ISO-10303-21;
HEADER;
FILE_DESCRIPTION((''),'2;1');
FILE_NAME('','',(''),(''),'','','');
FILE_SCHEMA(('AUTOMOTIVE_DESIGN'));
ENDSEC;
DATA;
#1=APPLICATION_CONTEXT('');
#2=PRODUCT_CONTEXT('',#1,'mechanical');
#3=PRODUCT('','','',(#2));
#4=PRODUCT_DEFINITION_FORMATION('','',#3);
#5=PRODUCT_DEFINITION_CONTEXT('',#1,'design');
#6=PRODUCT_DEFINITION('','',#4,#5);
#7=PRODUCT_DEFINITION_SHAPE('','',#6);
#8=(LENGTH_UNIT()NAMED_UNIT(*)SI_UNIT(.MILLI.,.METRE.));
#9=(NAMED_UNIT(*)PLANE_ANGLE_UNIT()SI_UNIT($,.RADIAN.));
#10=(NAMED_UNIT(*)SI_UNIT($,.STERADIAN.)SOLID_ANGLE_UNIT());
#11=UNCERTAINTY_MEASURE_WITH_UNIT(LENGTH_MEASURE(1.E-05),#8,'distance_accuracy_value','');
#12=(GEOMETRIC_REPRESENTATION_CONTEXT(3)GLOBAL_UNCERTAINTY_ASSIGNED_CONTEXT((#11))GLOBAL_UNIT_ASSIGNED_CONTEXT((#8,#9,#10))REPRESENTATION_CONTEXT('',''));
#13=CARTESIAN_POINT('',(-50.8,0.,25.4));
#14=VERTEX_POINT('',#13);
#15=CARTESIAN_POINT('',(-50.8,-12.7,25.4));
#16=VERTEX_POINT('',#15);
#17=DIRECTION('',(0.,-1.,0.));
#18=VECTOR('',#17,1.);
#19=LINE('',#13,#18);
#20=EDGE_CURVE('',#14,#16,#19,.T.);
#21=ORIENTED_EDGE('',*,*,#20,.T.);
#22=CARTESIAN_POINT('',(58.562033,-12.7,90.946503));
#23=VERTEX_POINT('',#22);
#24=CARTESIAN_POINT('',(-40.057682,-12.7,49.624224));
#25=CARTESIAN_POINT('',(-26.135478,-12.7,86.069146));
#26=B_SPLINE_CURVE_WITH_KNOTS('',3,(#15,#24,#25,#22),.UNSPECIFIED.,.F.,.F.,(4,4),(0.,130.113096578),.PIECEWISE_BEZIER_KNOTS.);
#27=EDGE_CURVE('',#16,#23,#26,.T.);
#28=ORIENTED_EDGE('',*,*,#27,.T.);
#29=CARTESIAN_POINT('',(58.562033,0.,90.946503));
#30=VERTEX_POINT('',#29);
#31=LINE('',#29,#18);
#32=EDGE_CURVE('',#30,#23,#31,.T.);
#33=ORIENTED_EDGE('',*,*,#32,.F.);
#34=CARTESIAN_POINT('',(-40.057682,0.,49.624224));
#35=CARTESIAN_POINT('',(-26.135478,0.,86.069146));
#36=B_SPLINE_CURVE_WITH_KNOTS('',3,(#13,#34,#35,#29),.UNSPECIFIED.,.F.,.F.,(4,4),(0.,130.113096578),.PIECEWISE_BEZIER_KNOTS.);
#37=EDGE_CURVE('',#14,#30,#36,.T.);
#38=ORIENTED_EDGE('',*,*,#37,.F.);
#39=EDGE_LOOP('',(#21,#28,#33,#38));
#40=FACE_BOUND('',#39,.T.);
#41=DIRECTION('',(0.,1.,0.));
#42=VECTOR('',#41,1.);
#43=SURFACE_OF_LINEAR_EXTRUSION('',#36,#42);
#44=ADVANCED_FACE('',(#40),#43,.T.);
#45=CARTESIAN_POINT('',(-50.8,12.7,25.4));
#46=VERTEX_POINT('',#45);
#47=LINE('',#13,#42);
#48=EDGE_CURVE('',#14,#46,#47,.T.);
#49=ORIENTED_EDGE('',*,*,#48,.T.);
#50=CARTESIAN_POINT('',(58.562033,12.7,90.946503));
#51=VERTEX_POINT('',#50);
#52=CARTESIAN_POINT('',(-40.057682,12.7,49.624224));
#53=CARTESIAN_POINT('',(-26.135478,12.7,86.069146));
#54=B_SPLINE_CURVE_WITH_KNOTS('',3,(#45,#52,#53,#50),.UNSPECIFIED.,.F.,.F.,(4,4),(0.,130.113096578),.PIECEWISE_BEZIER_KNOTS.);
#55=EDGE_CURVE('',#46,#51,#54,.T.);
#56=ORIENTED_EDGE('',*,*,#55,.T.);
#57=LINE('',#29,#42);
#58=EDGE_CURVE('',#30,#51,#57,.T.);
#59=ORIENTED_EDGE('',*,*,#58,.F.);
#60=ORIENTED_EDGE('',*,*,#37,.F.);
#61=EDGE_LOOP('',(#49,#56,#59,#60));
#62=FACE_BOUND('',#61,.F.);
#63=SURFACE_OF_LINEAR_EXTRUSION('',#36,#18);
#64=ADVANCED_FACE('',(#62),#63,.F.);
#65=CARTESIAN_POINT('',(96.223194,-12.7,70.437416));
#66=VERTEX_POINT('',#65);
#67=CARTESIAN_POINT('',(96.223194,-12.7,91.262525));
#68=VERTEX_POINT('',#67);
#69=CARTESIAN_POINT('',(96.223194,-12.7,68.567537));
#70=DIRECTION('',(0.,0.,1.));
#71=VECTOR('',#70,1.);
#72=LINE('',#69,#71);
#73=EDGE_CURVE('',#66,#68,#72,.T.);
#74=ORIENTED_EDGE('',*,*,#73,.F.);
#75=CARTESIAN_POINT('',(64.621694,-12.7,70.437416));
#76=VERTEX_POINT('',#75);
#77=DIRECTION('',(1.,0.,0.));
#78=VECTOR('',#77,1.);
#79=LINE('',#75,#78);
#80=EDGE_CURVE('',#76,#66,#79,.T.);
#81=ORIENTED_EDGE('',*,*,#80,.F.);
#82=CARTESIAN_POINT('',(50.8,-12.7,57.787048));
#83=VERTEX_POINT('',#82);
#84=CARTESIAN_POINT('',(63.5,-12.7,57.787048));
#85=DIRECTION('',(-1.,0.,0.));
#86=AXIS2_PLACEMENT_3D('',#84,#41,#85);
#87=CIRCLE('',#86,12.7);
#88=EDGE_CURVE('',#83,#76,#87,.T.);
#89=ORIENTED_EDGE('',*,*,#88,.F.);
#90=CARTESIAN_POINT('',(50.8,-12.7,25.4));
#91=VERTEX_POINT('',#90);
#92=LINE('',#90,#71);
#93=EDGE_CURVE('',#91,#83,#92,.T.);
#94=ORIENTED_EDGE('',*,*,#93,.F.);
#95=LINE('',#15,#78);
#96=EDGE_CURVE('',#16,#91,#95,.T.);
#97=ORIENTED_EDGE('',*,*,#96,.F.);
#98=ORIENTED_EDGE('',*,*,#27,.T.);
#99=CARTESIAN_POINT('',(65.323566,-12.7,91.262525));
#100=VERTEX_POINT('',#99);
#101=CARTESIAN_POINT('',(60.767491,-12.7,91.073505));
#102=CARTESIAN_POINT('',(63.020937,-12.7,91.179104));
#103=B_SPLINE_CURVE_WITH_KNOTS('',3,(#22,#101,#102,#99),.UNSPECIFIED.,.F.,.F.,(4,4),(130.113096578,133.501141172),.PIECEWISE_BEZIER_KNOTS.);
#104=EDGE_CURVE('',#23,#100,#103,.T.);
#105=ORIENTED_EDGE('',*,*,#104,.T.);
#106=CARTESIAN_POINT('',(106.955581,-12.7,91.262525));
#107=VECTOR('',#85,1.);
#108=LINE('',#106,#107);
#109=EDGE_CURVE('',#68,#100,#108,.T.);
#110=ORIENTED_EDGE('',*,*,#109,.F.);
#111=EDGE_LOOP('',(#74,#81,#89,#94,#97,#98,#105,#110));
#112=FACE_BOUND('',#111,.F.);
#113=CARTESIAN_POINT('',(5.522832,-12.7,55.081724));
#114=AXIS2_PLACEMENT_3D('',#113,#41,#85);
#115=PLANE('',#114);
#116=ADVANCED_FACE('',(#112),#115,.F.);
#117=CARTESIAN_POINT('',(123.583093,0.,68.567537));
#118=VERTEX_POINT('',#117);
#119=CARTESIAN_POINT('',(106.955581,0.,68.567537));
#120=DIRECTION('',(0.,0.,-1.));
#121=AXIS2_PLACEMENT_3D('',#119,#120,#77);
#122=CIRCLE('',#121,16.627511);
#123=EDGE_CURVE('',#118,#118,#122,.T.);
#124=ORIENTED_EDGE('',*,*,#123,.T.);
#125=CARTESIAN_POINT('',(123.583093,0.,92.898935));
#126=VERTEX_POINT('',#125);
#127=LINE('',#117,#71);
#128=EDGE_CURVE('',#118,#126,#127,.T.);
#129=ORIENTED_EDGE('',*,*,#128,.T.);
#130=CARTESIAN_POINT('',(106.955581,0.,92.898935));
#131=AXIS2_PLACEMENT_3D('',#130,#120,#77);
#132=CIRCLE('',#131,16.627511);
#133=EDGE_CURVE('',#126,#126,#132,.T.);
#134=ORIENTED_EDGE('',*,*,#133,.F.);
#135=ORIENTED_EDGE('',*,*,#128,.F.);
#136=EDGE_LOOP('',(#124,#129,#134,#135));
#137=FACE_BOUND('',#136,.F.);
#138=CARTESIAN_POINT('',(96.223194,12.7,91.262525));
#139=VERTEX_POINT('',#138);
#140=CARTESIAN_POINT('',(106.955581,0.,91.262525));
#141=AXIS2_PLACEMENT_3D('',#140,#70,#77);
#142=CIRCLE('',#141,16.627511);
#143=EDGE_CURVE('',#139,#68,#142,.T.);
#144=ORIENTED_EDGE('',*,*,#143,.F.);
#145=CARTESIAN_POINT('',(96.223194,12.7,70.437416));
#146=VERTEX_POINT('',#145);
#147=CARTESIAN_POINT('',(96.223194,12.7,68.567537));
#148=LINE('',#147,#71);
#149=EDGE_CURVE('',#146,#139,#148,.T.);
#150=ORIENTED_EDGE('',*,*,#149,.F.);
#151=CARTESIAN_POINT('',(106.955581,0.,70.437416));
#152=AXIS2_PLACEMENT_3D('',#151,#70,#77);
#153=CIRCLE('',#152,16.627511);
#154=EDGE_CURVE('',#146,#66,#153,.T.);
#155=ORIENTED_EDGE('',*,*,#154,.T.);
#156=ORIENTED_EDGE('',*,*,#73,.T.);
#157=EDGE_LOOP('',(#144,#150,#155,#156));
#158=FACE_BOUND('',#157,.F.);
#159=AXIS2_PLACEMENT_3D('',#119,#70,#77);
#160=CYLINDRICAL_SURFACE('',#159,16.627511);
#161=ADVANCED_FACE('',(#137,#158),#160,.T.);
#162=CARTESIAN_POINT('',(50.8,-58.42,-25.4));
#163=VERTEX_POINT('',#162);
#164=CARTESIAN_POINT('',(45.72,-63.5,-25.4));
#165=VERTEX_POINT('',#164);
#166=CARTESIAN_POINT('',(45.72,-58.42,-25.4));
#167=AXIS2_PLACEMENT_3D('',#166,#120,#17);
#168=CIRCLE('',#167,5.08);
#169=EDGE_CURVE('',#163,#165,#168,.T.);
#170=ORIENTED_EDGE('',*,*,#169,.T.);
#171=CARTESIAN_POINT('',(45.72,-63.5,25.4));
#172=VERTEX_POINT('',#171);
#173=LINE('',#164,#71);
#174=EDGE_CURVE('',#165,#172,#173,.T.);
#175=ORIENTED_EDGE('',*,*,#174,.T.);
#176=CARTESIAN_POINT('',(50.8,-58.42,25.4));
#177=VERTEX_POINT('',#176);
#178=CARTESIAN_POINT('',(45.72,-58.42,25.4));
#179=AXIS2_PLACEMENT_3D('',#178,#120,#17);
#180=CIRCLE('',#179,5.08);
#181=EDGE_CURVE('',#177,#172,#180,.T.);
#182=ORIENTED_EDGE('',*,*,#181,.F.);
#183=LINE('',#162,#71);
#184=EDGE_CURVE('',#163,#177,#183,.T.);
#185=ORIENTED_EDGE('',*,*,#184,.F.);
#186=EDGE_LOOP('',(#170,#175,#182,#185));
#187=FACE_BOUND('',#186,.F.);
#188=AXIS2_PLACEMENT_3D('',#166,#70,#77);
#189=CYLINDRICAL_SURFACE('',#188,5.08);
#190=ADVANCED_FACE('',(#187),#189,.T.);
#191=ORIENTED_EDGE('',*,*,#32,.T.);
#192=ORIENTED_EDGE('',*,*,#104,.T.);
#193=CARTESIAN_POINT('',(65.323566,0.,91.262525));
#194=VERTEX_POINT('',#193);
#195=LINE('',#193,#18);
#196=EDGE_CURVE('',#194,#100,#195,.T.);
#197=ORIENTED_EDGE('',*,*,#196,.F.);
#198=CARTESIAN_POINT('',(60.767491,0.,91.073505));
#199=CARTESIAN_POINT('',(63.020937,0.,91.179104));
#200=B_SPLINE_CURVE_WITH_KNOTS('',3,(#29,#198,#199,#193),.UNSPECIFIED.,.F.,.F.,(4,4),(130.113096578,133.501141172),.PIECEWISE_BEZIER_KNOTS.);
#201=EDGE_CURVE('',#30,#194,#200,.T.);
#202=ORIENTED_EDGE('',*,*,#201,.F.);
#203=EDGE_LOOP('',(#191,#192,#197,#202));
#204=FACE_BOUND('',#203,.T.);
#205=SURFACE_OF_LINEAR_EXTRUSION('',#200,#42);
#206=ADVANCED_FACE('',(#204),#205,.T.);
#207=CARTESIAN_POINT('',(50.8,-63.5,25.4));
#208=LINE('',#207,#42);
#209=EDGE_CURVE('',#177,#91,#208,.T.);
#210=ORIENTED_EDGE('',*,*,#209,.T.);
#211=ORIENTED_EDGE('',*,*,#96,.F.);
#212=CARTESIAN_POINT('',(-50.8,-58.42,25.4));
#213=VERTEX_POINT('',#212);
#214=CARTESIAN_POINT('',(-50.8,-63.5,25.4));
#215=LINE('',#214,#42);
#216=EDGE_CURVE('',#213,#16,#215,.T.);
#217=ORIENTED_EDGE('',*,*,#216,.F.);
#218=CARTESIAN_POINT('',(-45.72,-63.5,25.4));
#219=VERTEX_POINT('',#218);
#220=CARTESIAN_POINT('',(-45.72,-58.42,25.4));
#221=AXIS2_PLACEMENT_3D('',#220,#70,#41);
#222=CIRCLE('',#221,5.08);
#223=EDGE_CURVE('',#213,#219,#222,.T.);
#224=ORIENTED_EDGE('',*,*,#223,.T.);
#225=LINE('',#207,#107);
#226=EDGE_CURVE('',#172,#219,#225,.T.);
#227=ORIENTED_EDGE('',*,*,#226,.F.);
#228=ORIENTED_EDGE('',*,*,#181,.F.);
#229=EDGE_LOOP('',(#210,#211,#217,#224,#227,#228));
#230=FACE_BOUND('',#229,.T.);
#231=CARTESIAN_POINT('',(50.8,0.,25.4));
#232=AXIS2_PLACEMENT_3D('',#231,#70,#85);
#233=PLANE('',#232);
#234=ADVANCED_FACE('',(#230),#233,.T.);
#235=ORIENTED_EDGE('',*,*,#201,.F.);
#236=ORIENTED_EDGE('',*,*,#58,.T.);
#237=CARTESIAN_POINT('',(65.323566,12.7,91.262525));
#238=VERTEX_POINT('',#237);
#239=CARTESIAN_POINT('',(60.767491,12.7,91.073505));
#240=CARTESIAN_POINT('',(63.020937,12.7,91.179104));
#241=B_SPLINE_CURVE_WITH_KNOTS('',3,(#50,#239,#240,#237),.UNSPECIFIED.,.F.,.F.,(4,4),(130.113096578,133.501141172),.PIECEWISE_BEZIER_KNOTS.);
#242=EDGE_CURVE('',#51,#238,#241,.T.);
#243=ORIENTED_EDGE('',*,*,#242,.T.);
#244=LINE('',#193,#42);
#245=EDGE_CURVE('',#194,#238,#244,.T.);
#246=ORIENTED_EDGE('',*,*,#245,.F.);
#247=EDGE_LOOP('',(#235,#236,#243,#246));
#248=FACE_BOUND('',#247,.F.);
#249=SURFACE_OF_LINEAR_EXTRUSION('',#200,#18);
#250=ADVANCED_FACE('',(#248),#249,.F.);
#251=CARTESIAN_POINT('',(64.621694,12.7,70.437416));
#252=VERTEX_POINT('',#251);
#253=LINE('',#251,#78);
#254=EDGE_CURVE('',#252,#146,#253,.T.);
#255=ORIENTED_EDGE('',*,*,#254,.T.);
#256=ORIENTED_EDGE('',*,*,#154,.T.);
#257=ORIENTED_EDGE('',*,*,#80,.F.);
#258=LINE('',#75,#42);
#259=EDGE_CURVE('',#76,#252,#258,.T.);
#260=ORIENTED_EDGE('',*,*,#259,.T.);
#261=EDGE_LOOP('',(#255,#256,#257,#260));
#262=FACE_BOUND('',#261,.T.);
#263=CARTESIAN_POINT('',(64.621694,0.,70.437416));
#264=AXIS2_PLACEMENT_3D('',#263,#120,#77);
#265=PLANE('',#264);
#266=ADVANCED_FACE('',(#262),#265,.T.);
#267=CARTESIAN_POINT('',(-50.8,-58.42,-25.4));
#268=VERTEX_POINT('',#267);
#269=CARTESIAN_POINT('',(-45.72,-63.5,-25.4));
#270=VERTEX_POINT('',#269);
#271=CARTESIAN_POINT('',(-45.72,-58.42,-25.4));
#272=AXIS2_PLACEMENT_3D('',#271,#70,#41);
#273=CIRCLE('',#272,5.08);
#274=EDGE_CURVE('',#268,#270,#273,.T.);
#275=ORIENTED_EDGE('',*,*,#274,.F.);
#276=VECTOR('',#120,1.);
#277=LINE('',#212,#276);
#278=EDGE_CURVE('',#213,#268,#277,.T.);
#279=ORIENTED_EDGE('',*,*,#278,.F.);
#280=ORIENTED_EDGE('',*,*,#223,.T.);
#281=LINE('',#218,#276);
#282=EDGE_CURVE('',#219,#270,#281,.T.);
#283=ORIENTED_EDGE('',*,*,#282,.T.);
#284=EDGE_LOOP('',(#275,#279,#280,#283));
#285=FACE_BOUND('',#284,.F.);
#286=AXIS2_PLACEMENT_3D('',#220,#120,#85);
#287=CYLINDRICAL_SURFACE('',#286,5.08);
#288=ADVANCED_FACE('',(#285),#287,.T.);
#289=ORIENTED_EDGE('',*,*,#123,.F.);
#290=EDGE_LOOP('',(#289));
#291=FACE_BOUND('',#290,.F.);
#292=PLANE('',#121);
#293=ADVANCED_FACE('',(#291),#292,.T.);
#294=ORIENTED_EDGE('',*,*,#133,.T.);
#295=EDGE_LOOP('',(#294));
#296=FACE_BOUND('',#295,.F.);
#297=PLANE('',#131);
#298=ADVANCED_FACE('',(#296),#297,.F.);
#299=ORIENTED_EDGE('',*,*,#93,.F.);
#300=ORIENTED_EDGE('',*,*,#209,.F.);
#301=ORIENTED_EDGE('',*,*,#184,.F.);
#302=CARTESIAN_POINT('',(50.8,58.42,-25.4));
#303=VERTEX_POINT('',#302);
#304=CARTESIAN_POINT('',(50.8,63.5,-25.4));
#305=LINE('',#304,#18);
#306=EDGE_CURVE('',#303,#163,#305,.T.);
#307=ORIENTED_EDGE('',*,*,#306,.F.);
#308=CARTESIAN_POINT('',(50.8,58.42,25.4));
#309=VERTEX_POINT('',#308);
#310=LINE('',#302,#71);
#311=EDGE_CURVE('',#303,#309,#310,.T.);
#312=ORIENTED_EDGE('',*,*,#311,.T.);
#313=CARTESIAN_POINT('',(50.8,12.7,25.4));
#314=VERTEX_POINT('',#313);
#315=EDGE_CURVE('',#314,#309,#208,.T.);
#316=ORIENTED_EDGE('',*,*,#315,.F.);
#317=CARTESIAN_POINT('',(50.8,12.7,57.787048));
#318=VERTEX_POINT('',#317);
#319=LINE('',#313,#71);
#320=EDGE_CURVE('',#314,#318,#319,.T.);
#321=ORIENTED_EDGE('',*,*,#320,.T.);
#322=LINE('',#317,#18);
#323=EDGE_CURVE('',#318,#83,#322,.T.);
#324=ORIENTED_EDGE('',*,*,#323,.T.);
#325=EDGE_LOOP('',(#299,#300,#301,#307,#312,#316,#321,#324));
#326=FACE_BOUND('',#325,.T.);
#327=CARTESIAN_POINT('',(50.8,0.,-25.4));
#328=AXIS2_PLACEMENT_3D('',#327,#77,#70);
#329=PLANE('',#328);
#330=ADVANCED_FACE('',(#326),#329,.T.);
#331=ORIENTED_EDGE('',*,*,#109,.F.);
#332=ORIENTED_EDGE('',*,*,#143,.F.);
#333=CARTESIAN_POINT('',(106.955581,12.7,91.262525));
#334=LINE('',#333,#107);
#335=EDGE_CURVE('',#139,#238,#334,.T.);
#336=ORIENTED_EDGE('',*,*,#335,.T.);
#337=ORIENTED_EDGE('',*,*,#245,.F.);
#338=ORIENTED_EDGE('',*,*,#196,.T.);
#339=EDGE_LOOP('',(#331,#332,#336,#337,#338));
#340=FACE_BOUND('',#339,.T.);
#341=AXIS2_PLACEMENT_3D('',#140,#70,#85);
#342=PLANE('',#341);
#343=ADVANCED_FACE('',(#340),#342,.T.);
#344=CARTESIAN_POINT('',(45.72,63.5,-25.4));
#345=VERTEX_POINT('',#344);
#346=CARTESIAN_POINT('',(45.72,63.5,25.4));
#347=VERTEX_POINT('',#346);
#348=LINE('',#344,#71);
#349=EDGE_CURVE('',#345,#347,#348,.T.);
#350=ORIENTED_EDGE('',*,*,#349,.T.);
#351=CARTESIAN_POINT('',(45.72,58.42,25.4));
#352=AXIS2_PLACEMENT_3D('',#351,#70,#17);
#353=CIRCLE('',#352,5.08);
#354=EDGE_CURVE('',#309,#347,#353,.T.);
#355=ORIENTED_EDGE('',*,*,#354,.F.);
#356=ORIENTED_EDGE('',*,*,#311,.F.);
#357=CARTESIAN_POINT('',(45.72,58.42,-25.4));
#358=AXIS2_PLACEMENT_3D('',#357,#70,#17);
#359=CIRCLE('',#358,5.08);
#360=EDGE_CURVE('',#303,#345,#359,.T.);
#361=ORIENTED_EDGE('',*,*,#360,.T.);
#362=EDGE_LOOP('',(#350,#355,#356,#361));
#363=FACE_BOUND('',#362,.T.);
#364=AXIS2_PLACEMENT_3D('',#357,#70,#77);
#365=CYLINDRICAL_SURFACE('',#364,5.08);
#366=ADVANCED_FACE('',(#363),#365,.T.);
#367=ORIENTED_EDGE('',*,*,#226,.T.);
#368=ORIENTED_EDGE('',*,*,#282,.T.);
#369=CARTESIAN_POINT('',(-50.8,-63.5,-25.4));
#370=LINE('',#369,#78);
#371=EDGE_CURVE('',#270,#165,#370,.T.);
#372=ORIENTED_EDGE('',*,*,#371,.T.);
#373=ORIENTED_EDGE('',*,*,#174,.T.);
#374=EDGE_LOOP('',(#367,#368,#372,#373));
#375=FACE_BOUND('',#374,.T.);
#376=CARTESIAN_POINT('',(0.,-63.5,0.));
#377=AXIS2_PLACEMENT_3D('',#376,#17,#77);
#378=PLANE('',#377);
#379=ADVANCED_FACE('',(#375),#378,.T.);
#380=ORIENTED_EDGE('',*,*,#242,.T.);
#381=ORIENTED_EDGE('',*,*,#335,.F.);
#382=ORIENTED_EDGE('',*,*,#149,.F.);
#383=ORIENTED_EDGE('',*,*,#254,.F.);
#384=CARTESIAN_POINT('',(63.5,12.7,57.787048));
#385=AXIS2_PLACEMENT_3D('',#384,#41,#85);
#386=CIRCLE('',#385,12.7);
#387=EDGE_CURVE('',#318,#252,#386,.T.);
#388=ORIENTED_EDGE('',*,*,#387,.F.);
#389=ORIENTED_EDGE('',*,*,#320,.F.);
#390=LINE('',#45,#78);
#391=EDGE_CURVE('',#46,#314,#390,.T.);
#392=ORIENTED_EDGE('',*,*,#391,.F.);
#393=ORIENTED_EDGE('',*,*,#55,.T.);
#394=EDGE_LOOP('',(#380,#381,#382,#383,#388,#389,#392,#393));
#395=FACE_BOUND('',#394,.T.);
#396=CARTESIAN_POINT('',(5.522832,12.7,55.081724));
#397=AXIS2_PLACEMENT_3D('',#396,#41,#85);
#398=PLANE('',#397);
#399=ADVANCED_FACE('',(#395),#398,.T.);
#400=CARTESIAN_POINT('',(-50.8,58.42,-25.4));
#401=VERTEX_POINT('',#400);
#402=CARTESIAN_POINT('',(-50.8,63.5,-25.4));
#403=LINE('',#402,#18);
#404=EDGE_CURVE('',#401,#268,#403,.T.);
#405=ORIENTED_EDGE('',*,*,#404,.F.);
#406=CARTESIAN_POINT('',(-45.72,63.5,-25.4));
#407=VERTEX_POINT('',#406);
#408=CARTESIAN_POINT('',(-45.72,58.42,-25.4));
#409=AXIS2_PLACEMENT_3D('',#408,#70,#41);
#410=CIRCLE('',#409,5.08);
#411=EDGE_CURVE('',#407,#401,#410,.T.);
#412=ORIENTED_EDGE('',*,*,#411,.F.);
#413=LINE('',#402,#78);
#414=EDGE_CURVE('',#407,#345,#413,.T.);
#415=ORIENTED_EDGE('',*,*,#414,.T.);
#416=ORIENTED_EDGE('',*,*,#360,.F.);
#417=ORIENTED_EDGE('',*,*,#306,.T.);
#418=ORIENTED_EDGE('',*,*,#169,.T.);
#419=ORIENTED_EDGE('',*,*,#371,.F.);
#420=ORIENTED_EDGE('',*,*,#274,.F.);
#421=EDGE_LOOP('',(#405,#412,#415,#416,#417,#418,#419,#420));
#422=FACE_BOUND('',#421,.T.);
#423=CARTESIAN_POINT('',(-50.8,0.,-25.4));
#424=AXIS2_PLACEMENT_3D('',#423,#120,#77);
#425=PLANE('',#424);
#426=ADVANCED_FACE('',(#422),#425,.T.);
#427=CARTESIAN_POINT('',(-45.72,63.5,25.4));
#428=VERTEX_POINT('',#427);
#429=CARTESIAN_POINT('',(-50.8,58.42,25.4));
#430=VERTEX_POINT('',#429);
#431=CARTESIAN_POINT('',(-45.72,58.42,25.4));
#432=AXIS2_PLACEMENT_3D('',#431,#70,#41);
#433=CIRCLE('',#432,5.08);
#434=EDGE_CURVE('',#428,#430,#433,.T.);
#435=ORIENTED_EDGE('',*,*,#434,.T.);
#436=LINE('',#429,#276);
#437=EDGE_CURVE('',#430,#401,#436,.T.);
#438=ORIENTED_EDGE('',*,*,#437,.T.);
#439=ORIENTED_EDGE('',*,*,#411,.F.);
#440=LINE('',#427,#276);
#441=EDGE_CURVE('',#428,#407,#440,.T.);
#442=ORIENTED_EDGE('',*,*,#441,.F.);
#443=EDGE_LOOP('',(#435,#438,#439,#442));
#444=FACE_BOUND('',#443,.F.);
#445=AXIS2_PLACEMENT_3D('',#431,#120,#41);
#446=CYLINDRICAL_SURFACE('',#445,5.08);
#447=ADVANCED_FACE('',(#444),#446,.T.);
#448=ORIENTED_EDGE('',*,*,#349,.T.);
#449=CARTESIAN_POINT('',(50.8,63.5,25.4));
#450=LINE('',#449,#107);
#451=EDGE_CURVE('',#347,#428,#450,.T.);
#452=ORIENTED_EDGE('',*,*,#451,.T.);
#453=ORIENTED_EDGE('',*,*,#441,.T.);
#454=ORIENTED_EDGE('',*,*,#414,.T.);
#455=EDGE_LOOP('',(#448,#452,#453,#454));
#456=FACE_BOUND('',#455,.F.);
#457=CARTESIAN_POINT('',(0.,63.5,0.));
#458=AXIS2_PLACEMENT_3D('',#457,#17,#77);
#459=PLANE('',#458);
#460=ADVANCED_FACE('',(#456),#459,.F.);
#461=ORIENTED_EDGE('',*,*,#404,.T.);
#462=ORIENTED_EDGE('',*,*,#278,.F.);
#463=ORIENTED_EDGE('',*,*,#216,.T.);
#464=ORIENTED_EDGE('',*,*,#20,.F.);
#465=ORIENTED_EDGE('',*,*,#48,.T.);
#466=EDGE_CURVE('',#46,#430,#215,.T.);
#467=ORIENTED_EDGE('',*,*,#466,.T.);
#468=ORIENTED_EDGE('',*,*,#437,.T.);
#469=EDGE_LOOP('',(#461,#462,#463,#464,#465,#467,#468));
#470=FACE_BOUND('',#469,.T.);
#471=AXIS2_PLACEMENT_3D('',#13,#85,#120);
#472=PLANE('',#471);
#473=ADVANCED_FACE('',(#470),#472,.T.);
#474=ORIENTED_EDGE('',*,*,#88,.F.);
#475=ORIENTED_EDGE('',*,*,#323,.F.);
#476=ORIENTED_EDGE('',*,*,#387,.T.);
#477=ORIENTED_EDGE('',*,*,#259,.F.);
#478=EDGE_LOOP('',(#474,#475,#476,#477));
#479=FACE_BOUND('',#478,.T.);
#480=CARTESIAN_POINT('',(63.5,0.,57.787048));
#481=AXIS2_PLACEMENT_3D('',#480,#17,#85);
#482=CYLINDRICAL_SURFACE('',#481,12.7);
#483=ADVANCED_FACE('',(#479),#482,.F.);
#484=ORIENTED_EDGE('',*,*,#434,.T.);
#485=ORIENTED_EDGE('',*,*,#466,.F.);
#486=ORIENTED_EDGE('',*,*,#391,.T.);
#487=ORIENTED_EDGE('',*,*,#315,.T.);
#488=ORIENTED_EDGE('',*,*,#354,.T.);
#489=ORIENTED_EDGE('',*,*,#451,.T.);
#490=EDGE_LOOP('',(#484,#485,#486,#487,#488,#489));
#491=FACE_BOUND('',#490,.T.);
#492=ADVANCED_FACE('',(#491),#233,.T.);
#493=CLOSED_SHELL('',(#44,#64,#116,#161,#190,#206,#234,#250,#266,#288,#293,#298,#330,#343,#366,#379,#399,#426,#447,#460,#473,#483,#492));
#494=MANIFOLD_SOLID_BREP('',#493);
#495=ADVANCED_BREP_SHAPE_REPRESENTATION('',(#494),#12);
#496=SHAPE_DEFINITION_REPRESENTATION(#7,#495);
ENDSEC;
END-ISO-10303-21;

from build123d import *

# Parameters (mm, degrees)
F1_DEPTH = 63.5
F0_W     = 17.5679588894
F0_H     = 20.8251091272
F2_DEPTH = 12.7
F4_R     = 5.08
F5_R     = 5.08


with BuildPart() as f1:
    # F0 (on Front) → F1 (new body, symmetric)
    with BuildSketch(Plane.XZ):
        Polygon((-50.8, 25.4), (-50.8, -25.4), (50.8, -25.4), (50.8, 25.4), (29.9748908728, 25.4), align=None)
    extrude(amount=F1_DEPTH, both=True)

    # F0 (on Front) → F2 (join, symmetric)
    with BuildSketch(Plane.XZ):
        with BuildLine():
            add(Edge.make_bspline(
                [(-50.8, 25.4), (-40.0576822889, 49.6242242179), (-26.1354784037, 86.069146105), (58.5620329332, 90.9465027441)],
                knots=[0, 0, 0, 0, 130.1130965779, 130.1130965779, 130.1130965779, 130.1130965779], degree=3))
            Line((-50.8, 25.4), (29.9748908728, 25.4))
            Line((29.9748908728, 25.4), (29.9748908728, 57.7870482366))
            ThreePointArc((29.9748908728, 57.7870482366), (38.1082806139, 79.6775376922), (58.5620329332, 90.9465027441))
        make_face()
        with BuildLine():
            Line((29.9748908728, 25.4), (50.8, 25.4))
            Line((50.8, 25.4), (50.8, 57.7870482366))
            ThreePointArc((50.8, 57.7870482366), (54.9254885829, 67.1554928224), (64.6216935366, 70.4374159629))
            Line((64.6216935366, 70.4374159629), (89.3876225336, 70.4374159629))
            Line((89.3876225336, 70.4374159629), (89.3876225336, 91.2625250901))
            Line((89.3876225336, 91.2625250901), (65.3235655796, 91.2625250901))
            add(Edge.make_bspline(
                [(58.5620329332, 90.9465027441), (60.7674907461, 91.0735053459), (63.0209371473, 91.1791038317), (65.3235655796, 91.2625250901)],
                knots=[130.1130965779, 130.1130965779, 130.1130965779, 130.1130965779, 133.5011411718, 133.5011411718, 133.5011411718, 133.5011411718], degree=3))
            ThreePointArc((58.5620329332, 90.9465027441), (38.1082806139, 79.6775376922), (29.9748908728, 57.7870482366))
            Line((29.9748908728, 57.7870482366), (29.9748908728, 25.4))
        make_face()
        with Locations((98.1716019783, 80.8499705265)):
            Rectangle(F0_W, F0_H)
    extrude(amount=F2_DEPTH, both=True)

    # F0 (on Front) → F3 (revolve)
    with BuildSketch(Plane.XZ):
        Polygon((106.955581423, 92.8989347667), (106.955581423, 91.2625250901), (106.955581423, 70.4374159629), (106.955581423, 68.5675365603), (123.5830926897, 68.5675365603), (123.5830926897, 92.8989347667), align=None)
    revolve(axis=Axis((106.955581423, 0, 80.7332356635), (0, 0, -1)))

    # F4
    f4_edges = [f1.edges().sort_by_distance(p)[0] for p in [
        (50.8, -63.5, 0),
        (-50.8, -63.5, 0),
        (50.8, 63.5, 0),
    ]]
    fillet(f4_edges, radius=F4_R)

    # F5
    f5_edges = [f1.edges().sort_by_distance(p)[0] for p in [
        (-50.8, 63.5, 0),
    ]]
    fillet(f5_edges, radius=F5_R)


solid = f1.part
